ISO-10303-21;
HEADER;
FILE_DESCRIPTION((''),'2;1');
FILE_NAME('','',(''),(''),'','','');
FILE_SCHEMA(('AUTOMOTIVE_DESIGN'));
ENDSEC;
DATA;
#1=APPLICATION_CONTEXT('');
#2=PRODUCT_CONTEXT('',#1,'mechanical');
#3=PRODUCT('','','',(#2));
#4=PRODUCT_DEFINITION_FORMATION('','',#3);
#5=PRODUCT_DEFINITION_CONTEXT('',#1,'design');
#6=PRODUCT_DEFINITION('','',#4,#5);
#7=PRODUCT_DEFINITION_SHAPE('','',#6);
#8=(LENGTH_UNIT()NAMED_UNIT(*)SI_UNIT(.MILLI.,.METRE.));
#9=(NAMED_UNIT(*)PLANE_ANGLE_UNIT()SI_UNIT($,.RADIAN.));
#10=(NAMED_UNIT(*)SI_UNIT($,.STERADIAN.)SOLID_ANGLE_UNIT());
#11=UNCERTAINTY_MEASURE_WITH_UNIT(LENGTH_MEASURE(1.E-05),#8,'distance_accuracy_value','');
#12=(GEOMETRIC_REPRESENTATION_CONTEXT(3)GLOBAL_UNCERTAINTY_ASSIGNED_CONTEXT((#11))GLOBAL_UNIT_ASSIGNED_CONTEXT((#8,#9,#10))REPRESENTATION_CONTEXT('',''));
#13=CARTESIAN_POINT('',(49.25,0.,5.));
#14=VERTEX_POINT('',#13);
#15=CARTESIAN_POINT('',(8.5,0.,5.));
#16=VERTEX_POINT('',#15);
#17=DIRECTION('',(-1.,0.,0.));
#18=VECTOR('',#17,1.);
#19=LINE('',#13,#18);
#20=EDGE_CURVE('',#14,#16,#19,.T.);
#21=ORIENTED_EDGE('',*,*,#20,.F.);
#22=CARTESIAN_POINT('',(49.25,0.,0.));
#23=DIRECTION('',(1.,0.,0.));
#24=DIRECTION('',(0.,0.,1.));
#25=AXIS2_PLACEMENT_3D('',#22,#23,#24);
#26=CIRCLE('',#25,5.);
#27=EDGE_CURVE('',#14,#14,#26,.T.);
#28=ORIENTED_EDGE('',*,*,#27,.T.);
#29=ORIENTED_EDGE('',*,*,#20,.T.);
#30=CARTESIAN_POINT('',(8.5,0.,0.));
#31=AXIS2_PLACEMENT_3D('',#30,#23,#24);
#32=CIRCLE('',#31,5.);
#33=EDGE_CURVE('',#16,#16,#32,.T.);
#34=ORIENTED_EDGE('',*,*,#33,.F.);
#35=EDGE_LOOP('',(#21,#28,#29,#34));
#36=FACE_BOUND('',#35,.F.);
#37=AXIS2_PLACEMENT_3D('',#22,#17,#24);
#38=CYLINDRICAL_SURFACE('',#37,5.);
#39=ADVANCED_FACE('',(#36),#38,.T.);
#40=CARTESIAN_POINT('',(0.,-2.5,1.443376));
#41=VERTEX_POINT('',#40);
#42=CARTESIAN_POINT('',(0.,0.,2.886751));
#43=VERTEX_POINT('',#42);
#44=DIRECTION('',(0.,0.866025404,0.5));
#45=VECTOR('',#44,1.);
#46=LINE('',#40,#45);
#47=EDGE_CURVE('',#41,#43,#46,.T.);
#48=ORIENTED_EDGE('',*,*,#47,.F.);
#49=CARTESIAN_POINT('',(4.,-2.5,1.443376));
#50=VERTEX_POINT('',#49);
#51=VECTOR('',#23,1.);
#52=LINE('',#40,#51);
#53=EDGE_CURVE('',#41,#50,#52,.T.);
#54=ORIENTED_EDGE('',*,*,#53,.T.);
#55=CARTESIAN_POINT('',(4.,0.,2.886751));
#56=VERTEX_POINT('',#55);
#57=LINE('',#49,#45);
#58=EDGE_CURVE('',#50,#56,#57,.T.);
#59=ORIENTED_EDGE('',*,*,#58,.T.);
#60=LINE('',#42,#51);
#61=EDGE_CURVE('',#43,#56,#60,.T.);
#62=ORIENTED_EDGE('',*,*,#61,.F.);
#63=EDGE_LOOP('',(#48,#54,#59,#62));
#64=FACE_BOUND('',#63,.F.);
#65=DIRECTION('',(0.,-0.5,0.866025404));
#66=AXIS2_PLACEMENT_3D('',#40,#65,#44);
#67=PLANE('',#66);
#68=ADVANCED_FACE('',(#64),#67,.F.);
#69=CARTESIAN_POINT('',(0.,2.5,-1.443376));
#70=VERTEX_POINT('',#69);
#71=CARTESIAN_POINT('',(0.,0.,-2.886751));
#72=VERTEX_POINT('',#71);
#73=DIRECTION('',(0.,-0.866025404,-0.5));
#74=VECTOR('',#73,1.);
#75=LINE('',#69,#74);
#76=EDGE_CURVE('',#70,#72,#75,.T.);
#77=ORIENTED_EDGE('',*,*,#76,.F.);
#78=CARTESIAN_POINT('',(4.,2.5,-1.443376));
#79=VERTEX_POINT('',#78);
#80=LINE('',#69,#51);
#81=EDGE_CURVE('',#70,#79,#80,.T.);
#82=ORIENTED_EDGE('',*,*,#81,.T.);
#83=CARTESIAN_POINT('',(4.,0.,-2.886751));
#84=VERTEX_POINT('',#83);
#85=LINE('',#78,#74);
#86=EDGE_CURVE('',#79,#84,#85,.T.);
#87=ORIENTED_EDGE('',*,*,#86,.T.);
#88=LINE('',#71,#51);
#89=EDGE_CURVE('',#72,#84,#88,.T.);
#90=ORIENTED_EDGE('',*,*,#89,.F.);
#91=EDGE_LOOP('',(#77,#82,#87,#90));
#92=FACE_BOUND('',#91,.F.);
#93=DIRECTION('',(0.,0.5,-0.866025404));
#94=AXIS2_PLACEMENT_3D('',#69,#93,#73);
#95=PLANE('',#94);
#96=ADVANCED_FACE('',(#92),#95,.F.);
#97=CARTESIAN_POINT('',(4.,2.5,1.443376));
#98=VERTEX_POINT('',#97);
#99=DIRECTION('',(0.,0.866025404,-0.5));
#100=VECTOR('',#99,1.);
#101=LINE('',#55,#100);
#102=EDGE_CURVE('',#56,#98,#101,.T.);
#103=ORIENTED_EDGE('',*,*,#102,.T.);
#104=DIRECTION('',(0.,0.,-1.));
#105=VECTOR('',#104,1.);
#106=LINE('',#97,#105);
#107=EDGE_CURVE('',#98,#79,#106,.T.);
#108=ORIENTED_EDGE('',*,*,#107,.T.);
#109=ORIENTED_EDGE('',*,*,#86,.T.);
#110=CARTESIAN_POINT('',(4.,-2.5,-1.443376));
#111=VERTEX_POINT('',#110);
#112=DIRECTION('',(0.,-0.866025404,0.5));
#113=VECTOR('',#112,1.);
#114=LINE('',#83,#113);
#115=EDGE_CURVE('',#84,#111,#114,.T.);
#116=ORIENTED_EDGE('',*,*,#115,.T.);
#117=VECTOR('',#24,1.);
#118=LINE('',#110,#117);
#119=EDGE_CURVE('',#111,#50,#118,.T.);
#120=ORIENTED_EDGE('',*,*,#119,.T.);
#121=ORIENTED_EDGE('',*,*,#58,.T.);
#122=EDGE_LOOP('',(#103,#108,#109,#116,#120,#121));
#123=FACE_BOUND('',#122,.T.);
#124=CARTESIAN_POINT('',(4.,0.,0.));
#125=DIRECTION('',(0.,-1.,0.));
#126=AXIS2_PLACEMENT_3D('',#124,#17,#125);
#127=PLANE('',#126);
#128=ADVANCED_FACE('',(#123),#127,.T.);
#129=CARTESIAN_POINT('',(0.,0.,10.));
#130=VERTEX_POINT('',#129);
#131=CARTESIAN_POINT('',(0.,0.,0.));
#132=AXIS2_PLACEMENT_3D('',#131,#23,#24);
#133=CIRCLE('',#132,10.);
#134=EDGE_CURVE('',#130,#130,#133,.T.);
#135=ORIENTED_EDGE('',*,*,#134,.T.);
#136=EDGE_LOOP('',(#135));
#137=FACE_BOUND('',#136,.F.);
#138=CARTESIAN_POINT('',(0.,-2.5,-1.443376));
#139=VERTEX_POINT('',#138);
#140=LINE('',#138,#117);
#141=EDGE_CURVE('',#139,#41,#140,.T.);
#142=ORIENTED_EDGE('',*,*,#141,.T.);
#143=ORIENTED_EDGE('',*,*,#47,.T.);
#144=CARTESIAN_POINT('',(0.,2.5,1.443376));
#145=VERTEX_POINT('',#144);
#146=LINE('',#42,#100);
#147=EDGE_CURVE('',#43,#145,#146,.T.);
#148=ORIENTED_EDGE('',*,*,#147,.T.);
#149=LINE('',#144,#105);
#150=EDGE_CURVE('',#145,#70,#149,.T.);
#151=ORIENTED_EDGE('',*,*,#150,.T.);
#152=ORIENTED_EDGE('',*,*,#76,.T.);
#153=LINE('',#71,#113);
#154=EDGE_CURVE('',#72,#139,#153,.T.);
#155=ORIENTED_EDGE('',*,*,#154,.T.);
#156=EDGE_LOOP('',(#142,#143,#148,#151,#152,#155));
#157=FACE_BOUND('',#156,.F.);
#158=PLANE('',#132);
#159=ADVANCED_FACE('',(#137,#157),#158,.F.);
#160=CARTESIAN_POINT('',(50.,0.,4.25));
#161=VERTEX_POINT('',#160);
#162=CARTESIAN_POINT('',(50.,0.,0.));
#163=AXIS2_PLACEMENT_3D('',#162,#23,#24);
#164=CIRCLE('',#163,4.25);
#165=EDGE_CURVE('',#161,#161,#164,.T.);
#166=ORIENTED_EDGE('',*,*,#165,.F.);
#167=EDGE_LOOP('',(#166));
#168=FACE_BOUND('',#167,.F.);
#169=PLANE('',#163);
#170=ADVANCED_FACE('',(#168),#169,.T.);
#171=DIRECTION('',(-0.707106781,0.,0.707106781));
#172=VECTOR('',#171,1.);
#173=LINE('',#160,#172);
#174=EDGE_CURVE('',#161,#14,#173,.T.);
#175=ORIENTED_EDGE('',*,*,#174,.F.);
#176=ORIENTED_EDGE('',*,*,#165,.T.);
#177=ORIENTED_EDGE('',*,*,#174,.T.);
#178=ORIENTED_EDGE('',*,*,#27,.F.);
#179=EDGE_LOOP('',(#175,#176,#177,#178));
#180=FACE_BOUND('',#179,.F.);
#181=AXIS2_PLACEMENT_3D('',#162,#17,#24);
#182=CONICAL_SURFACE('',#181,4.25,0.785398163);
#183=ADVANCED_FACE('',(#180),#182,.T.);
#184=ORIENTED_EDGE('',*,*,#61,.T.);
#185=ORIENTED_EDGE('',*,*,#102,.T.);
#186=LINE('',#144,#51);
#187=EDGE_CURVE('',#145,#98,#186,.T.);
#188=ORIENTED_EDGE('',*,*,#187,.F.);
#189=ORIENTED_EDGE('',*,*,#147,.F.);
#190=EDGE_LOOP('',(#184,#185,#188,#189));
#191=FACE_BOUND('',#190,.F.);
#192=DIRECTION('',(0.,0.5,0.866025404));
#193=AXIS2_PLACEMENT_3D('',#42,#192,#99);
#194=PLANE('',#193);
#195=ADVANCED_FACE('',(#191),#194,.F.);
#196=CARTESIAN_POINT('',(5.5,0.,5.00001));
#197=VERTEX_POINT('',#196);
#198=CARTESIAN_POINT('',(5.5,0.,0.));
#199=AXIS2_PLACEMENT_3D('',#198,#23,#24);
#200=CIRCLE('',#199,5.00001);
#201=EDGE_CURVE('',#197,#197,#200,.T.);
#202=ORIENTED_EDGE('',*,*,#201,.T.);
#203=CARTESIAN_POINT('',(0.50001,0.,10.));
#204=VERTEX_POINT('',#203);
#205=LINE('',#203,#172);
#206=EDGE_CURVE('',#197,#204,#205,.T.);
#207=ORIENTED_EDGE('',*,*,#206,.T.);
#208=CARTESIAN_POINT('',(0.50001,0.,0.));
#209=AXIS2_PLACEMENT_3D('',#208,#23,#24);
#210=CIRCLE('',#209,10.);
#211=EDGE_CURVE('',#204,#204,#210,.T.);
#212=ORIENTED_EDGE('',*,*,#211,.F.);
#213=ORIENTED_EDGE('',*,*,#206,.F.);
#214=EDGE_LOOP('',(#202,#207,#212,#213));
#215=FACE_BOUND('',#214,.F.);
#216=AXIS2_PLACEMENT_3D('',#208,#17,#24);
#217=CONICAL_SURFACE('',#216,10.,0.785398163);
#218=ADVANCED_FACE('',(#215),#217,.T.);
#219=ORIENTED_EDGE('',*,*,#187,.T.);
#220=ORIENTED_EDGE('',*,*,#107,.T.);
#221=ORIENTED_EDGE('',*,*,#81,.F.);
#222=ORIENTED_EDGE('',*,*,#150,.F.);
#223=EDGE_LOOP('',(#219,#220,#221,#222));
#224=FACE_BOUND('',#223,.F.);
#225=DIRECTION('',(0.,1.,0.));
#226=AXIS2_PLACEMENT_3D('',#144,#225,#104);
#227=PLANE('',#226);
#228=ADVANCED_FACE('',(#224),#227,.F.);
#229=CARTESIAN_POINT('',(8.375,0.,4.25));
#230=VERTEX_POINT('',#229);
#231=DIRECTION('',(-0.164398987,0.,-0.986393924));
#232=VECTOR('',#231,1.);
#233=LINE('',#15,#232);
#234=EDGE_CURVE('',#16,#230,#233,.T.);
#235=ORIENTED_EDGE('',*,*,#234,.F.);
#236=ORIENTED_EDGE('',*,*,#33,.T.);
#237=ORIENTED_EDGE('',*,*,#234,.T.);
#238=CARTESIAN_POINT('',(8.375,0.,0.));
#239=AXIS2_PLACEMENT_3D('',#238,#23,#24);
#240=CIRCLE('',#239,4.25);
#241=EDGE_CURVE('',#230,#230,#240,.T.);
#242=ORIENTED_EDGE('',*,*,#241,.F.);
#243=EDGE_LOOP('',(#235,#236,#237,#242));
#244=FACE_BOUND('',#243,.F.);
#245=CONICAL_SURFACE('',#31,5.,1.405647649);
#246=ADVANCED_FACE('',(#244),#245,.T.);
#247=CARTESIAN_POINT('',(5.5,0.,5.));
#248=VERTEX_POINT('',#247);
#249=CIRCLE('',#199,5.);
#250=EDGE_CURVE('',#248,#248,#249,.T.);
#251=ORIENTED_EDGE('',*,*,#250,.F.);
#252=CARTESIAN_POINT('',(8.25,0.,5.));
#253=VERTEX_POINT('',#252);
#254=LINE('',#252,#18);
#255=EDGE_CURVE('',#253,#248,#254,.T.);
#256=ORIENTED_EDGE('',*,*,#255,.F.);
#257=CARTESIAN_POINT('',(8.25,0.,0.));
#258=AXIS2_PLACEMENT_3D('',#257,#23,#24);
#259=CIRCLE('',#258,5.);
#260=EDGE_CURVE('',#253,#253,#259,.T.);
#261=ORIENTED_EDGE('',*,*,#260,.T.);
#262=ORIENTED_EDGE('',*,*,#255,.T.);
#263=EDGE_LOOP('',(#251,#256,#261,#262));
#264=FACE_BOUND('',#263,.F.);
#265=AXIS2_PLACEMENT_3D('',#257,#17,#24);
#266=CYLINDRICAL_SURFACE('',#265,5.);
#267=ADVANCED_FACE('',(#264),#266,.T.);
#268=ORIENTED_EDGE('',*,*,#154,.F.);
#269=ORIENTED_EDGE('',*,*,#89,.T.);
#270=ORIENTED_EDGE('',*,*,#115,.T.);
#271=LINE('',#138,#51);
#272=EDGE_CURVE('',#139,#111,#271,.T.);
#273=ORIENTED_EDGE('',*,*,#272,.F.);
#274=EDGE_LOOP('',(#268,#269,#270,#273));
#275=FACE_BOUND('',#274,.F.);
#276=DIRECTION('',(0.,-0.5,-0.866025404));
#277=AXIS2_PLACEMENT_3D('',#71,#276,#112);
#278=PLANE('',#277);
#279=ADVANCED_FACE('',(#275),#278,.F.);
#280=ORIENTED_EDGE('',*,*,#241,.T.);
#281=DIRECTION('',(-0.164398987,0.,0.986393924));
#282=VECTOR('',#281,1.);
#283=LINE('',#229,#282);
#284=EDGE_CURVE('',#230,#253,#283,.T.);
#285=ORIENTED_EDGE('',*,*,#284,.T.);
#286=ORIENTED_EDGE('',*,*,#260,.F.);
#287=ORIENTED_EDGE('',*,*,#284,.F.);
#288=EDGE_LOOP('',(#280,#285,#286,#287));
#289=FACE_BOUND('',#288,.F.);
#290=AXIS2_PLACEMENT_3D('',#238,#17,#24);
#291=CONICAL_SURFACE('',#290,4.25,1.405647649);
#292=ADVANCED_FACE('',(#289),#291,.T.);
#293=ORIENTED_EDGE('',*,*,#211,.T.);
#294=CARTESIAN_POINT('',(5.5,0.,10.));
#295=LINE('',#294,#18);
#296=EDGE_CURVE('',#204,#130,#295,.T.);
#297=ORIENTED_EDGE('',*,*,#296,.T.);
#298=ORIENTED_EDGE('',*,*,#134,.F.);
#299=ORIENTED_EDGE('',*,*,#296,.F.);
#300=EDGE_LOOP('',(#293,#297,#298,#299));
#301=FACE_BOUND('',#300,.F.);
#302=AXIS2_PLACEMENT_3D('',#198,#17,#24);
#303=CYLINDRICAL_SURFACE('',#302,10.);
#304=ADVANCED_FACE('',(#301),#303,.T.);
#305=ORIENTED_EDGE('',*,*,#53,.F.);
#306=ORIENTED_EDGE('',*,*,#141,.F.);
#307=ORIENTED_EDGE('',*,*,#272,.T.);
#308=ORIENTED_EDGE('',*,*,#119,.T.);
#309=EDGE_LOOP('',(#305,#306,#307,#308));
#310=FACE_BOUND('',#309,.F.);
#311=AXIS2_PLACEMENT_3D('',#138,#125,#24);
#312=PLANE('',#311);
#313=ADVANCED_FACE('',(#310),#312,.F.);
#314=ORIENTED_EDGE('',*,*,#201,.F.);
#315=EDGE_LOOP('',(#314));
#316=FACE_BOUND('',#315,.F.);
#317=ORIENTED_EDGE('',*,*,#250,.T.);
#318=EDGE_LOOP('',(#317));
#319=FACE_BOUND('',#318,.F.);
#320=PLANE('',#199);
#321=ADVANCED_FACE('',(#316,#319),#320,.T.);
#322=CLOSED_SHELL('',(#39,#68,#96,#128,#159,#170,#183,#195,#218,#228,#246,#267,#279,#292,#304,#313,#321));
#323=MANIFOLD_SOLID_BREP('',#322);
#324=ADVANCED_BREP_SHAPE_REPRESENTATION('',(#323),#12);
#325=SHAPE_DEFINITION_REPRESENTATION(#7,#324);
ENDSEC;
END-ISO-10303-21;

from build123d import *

# Parameters (mm, degrees)
F3_DEPTH = 4
F4_SIZE  = 4.99999


# Not quite as in the source:
# - a fillet or chamfer is up to 0.001 mm smaller than in the source, because OpenCascade refuses the exact size


with BuildPart() as f1:
    # F0 (on Front) → F1 (revolve)
    with BuildSketch(Plane.XZ):
        Polygon((5.5, 5), (5.5, 10), (0, 10), (0, 0), (50, 0), (50, 4.25), (49.25, 5), (8.5, 5), (8.375, 4.25), (8.25, 5), align=None)
    revolve(axis=Axis((25, 0, 0), (1, 0, 0)))

    # F2 (on face) → F3 (cut)
    with BuildSketch(Plane(origin=(0, 0, 0), x_dir=(0, -1, 0), z_dir=(-1, 0, 0))):
        Polygon((0, -2.8867513459), (2.5, -1.443375673), (2.5, 1.443375673), (0, 2.8867513459), (-2.5, 1.443375673), (-2.5, -1.443375673), align=None)
    extrude(amount=-F3_DEPTH, mode=Mode.SUBTRACT)

    # F4 (size 5 in the source; OpenCascade refuses exactly that, so slightly less here)
    f4_edges = [f1.edges().sort_by_distance(p)[0] for p in [
        (5.5, 0, -10),
    ]]
    chamfer(f4_edges, length=F4_SIZE)


solid = f1.part
